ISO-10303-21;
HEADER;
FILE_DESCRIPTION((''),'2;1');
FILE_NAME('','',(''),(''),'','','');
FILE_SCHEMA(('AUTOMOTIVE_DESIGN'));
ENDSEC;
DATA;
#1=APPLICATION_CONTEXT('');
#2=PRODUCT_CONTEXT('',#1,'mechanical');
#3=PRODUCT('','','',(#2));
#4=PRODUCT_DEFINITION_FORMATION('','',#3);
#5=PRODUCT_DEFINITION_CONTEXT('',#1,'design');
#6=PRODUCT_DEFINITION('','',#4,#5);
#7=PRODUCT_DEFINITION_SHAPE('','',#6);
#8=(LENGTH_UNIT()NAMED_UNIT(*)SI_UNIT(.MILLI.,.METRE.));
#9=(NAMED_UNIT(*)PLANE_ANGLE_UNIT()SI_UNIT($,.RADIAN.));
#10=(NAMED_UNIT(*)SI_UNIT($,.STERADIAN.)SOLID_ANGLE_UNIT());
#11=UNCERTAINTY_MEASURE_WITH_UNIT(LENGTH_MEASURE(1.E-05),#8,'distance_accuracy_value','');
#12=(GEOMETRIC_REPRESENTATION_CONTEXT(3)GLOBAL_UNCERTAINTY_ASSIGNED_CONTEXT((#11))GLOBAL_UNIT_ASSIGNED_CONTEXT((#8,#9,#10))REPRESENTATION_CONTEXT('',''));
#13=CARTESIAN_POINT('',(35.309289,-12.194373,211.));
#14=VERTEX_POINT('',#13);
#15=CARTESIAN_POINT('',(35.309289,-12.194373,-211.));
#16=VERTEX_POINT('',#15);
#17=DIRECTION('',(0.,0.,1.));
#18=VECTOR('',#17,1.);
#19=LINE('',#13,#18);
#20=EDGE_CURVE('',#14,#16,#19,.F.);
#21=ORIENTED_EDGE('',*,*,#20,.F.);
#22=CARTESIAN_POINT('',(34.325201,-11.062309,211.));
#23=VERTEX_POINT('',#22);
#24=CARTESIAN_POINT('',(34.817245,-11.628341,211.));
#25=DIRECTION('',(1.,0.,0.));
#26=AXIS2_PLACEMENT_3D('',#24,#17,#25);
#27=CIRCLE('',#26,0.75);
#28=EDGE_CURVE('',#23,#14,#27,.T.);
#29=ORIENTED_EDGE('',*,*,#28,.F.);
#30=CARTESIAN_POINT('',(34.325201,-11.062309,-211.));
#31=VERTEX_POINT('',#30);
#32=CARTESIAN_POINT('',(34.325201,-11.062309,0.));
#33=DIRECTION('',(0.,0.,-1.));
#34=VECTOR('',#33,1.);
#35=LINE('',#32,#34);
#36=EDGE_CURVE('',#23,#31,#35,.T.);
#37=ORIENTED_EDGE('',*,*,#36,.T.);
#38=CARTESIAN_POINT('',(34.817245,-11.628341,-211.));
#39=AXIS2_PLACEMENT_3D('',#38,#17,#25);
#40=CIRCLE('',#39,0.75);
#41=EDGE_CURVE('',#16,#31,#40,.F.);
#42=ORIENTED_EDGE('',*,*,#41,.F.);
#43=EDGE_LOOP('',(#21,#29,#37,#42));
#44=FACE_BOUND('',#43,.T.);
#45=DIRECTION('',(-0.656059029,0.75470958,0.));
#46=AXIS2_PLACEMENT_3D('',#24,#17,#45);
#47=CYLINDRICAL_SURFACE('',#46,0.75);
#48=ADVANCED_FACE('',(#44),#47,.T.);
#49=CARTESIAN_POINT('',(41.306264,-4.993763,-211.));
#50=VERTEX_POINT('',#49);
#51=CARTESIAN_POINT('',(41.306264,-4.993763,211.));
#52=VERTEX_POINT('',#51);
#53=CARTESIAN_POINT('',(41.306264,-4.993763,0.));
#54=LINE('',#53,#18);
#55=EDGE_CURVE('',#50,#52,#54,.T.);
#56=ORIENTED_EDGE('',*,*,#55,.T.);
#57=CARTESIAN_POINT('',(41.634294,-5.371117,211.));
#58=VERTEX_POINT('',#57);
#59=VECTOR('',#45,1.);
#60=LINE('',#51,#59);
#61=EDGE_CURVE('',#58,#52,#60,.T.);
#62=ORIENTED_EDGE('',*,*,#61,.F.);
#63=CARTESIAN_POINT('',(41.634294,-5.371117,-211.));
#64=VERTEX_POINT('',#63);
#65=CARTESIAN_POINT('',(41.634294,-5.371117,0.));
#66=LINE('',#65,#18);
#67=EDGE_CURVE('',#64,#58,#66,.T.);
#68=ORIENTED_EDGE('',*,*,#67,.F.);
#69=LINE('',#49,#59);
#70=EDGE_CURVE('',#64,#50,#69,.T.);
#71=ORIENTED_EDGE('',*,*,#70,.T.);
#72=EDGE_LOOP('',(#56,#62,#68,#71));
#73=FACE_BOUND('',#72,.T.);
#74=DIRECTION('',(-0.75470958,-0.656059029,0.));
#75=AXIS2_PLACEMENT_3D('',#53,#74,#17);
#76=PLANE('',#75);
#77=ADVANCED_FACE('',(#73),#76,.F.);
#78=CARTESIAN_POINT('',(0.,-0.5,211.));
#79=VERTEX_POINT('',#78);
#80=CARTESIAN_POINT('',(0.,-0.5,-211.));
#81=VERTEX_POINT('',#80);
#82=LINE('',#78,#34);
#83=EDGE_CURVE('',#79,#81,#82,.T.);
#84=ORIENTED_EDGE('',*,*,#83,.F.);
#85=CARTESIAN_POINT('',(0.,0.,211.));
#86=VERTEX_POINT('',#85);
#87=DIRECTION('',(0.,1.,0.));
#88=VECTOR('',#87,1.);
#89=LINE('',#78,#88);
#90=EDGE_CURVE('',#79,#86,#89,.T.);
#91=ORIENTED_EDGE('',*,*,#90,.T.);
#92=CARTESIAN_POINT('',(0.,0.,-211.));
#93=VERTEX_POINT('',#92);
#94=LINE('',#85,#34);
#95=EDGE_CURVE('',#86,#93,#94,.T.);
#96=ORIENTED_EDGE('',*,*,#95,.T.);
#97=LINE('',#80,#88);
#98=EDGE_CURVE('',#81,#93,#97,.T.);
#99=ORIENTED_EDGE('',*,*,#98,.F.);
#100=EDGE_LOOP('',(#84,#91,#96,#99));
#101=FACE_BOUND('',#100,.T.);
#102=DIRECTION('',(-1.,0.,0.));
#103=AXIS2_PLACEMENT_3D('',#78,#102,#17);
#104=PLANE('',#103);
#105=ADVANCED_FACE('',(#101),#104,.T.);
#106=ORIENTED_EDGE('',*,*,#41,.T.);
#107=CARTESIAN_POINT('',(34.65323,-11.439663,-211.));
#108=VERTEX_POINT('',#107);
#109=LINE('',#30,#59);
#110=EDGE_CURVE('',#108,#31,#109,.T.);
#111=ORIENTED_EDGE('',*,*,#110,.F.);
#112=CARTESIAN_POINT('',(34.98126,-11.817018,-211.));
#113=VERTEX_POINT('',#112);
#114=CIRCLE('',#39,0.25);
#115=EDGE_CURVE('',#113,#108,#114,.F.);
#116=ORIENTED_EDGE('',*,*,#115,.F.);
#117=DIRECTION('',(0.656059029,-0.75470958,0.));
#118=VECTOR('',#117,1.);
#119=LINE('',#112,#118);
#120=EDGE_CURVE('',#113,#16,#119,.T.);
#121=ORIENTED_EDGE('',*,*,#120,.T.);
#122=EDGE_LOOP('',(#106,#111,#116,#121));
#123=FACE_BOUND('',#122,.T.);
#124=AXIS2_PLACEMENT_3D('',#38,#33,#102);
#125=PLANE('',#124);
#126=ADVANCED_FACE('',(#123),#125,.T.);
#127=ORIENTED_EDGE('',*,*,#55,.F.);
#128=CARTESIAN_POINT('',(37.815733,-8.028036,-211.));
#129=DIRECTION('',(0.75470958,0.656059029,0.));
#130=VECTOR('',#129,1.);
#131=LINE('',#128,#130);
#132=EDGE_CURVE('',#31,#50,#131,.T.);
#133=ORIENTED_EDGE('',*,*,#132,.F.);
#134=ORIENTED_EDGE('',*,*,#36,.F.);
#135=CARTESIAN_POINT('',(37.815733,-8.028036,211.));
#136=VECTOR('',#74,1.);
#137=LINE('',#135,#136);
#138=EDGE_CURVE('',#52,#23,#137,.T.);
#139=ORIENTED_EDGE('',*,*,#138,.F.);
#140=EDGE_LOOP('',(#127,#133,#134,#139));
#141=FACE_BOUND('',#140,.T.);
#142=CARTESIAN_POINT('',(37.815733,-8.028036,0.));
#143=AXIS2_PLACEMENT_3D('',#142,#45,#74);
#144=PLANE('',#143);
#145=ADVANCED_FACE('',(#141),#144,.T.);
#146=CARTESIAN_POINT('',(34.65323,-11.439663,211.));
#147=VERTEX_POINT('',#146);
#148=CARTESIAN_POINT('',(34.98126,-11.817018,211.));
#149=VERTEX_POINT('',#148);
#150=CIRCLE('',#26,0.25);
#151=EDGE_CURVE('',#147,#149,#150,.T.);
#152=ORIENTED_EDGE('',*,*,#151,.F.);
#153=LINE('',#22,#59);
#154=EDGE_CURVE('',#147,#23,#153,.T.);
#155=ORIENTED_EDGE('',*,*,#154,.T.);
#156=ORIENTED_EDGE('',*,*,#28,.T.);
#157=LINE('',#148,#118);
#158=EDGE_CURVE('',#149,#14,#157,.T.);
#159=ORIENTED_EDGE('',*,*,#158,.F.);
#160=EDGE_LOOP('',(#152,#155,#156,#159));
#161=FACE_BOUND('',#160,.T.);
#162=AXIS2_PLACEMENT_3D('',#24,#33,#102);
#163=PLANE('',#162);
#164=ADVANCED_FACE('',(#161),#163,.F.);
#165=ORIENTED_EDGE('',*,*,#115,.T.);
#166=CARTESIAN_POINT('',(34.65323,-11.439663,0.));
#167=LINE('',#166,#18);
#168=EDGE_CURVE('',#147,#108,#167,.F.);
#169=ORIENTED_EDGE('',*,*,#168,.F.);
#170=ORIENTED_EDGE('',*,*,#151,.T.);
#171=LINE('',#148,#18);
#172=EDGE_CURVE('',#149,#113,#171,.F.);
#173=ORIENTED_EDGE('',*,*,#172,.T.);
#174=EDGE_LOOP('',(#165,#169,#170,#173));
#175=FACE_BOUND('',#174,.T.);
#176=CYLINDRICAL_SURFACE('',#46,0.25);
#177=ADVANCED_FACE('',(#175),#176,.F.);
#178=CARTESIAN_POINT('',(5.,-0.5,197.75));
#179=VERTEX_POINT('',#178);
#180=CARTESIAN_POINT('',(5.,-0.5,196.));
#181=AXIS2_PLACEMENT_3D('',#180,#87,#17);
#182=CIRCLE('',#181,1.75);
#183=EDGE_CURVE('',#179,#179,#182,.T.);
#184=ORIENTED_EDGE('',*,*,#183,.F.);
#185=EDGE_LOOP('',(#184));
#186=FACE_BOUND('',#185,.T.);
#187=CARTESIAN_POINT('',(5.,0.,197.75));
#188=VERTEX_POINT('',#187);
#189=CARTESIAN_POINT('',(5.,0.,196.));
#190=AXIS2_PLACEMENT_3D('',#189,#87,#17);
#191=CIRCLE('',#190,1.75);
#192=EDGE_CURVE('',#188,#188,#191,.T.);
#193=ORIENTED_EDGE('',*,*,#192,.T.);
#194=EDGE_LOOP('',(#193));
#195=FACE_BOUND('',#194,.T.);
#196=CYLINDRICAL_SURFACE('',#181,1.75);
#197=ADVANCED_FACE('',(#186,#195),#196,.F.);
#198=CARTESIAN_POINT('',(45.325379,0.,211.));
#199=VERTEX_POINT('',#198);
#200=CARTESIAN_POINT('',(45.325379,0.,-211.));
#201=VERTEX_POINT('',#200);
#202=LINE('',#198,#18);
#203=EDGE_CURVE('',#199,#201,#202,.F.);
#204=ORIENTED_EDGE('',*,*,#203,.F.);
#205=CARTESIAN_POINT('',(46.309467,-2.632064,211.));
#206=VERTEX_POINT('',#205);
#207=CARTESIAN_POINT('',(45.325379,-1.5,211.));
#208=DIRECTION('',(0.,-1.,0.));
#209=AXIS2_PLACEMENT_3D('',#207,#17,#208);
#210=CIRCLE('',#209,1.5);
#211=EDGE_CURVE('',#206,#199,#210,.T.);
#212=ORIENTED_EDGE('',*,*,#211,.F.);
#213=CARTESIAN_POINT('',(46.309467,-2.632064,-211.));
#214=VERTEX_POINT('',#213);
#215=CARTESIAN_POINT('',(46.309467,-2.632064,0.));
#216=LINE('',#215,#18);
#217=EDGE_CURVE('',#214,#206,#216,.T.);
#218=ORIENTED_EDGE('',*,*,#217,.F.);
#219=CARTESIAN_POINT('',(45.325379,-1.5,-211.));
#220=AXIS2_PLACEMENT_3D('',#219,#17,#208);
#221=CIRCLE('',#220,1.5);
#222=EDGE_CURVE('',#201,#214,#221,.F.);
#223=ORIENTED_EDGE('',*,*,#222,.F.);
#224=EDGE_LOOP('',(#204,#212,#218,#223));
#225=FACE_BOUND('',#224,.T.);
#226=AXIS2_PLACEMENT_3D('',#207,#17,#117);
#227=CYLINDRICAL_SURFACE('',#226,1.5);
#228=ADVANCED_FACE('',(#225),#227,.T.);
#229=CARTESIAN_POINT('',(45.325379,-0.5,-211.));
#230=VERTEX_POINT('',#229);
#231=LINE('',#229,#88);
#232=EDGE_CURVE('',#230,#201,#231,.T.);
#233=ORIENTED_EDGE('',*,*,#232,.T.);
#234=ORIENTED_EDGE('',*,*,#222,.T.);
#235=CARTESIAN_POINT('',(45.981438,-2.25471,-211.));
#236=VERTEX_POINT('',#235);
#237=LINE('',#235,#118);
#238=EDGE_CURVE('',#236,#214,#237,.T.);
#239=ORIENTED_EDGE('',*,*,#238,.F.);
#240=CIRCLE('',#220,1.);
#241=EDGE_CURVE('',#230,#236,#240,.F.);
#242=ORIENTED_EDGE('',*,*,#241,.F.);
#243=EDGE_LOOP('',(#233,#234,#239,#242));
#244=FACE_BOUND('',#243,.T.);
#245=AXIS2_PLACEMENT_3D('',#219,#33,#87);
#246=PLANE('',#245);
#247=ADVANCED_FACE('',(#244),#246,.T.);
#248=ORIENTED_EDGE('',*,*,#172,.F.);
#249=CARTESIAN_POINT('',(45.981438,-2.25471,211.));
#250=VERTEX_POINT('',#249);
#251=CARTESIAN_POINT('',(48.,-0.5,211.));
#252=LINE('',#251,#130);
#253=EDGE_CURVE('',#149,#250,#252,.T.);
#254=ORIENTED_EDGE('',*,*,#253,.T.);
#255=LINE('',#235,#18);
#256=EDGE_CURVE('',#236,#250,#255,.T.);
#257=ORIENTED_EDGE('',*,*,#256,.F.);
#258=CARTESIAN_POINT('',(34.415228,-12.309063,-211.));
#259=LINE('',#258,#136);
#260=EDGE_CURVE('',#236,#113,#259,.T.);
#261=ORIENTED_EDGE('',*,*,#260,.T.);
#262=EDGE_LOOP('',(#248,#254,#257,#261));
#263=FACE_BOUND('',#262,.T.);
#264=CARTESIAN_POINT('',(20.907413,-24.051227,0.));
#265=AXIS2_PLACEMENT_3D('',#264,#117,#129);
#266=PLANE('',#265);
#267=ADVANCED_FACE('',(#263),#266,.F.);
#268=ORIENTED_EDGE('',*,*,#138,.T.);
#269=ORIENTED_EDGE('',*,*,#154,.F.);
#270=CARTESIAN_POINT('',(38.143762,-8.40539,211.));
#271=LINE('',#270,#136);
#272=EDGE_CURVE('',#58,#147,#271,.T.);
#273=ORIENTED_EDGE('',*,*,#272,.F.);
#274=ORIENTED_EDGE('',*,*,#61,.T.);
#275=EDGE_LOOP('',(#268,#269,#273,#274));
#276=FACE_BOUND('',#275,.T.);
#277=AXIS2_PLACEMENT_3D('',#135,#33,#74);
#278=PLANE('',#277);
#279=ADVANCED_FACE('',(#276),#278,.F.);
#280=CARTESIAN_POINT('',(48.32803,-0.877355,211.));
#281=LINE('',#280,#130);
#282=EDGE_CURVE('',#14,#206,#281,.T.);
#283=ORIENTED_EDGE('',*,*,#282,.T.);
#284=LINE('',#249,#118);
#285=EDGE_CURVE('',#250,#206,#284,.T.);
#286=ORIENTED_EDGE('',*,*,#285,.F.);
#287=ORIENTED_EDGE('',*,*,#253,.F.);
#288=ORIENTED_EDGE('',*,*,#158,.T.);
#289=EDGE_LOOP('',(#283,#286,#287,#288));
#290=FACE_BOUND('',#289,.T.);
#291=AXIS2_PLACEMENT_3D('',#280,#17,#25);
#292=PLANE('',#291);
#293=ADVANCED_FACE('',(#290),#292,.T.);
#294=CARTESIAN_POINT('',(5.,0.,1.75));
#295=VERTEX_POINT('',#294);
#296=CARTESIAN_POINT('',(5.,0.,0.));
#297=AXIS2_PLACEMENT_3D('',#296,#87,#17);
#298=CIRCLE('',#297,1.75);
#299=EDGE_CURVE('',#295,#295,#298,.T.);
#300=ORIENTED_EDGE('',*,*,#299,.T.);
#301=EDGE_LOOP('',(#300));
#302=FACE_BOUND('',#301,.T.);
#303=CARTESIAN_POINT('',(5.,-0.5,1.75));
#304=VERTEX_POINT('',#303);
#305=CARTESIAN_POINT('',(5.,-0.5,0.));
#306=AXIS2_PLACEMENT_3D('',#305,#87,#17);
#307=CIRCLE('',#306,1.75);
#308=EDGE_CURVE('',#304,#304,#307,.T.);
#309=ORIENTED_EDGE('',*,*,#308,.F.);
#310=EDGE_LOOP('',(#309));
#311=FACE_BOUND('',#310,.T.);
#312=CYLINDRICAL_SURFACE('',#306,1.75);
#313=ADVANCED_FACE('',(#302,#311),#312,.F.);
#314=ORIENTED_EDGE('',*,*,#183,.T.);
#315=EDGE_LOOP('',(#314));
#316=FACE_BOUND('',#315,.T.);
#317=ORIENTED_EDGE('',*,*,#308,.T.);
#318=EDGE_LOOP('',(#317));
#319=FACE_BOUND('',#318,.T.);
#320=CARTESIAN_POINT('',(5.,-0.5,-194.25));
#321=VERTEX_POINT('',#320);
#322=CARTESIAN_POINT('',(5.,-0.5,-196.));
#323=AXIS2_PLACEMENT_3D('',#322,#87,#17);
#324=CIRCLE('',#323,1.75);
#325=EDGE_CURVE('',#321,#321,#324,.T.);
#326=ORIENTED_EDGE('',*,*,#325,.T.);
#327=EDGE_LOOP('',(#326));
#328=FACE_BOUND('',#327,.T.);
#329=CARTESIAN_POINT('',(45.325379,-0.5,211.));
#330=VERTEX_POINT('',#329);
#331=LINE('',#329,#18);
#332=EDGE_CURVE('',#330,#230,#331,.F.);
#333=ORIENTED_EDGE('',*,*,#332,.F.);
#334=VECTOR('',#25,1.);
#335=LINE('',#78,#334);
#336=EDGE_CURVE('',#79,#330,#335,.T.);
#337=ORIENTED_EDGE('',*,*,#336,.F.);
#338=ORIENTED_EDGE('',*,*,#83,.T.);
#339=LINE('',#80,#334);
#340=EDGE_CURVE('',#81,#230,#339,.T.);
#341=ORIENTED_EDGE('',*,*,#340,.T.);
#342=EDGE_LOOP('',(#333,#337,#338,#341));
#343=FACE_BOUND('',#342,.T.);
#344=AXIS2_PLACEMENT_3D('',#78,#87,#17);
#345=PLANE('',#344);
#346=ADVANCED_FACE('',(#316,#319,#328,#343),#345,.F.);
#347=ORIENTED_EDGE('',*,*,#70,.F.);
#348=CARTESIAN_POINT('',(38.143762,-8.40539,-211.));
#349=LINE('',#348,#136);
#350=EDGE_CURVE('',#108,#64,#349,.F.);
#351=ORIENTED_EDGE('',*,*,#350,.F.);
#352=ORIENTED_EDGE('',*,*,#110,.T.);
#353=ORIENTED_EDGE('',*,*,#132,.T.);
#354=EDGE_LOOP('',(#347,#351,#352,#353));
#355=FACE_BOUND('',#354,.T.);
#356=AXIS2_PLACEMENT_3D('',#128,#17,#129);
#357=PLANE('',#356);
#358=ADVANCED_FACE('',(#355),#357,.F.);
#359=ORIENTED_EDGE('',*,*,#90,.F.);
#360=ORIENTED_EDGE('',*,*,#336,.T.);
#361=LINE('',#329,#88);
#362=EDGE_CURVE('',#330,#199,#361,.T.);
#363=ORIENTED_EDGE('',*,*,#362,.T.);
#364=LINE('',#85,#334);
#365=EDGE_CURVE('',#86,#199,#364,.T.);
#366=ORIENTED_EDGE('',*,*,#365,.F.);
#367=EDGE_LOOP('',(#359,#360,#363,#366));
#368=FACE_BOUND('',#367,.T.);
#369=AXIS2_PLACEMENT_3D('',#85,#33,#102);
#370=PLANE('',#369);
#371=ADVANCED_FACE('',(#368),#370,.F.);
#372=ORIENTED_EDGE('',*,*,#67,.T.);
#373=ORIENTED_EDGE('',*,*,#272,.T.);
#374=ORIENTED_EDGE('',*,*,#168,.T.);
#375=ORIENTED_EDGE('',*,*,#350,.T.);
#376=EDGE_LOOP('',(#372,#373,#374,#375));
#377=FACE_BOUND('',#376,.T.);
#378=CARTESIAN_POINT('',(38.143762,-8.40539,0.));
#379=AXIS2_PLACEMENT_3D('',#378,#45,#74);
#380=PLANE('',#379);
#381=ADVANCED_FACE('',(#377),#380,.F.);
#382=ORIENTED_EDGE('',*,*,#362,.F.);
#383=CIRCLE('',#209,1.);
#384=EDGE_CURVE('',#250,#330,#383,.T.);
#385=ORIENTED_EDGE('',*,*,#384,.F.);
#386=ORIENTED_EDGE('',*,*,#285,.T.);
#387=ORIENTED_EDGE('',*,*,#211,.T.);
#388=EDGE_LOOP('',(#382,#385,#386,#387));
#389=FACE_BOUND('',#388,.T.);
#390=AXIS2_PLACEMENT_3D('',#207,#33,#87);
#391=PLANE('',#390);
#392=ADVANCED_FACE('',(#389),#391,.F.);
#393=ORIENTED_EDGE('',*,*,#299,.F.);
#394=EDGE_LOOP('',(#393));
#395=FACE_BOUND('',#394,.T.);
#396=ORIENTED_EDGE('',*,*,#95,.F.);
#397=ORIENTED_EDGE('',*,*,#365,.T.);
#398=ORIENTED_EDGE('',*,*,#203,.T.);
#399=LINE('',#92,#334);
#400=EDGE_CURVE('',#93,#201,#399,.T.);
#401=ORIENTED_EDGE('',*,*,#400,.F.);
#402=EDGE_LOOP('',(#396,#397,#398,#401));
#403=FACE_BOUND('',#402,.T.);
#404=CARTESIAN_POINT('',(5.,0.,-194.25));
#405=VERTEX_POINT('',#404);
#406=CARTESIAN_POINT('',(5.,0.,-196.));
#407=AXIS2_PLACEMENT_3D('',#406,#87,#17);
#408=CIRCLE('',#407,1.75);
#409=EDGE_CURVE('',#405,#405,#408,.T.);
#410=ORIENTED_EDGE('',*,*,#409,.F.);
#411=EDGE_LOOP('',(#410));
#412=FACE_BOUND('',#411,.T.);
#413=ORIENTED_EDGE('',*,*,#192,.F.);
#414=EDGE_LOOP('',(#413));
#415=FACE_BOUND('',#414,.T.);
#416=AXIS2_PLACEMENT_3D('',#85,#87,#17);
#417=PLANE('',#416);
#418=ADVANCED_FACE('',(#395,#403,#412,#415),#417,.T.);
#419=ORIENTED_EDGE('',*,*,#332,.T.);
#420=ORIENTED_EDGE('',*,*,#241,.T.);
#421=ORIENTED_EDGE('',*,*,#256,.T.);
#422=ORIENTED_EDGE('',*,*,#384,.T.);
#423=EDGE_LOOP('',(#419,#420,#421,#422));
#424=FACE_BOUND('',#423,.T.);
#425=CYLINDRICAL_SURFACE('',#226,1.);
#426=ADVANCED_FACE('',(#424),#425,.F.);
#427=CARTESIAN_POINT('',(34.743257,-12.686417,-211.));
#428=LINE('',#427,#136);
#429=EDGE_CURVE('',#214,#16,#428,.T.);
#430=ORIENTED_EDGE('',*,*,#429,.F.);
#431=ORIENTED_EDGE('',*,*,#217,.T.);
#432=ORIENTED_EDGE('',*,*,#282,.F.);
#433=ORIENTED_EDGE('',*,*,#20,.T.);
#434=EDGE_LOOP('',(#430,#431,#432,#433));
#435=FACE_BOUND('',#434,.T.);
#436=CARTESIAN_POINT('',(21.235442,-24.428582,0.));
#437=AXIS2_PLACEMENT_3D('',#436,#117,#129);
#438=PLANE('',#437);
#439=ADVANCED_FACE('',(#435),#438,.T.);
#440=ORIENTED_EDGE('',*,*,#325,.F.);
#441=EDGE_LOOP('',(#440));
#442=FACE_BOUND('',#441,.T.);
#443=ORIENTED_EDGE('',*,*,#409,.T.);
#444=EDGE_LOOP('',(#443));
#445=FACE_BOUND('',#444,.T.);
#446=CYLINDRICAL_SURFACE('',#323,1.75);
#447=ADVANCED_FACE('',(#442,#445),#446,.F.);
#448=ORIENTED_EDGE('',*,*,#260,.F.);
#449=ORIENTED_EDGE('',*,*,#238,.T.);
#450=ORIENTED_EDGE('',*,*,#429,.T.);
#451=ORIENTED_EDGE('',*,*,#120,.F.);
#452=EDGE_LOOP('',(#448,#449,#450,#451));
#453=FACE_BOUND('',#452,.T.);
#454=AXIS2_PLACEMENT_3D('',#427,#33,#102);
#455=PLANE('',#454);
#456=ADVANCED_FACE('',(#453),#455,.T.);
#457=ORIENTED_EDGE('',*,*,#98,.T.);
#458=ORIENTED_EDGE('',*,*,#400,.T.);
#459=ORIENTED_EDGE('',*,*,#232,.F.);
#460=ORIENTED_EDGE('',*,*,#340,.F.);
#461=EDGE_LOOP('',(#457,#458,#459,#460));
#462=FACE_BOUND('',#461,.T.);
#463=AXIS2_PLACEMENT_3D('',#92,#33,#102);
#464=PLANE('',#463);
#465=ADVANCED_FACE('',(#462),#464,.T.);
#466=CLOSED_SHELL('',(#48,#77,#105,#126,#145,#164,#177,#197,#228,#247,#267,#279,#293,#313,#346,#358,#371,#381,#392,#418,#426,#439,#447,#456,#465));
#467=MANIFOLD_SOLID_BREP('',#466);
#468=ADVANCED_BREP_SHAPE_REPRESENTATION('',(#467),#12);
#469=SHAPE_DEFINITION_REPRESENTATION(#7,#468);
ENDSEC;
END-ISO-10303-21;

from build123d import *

# Parameters (mm, degrees)
SKETCH1_W                    = 48
SKETCH1_H                    = 0.5
BASE_FLANGE1_DEPTH           = 211
SKETCH6_R                    = 1.75
CUT_EXTRUDE1_DEPTH           = 10
EDGE_FLANGE1_STRIP_CUT_DEPTH = 422
EDGE_FLANGE1_DEPTH           = 422
HEM1_START                   = -211
HEM1_DEPTH                   = 422
HEM1_2_DEPTH                 = 422


# Read off the part's stored shape, not the designer's step: Hem1
# Sheet-metal steps are written as plain solids
with BuildPart() as part:
    # Sketch1 → Base-Flange1 (new, symmetric)
    with BuildSketch(Plane.XY):
        with Locations((24, -0.25)):
            Rectangle(SKETCH1_W, SKETCH1_H)
    extrude(amount=BASE_FLANGE1_DEPTH, both=True)

    # Sketch6 → Cut-Extrude1 (cut)
    with BuildSketch(Plane(origin=(0, 0, 0), x_dir=(1, 0, 0), z_dir=(0, 1, 0))):
        with Locations(Location((5, 196, 0), (0, 0, 270))):
            Circle(SKETCH6_R)
        with Locations(Location((5, 0, 0), (0, 0, 270))):
            Circle(SKETCH6_R)
        with Locations(Location((5, -196, 0), (0, 0, 270))):
            Circle(SKETCH6_R)
    extrude(amount=-CUT_EXTRUDE1_DEPTH, mode=Mode.SUBTRACT)

    # Edge-Flange1 strip (across the edge) → Edge-Flange1 strip cut (cut)
    with BuildSketch(Plane(origin=(48, -0.5, -211), x_dir=(-0.6560590289905086, 0.754709580222771, 0), z_dir=(0, 0, 1))):
        Polygon((-4.886773951, -6.383716909), (2.13206437, 1.69053295), (1.75470958, 2.018562465), (-5.264128741, -6.055687395), align=None)
    extrude(amount=EDGE_FLANGE1_STRIP_CUT_DEPTH, mode=Mode.SUBTRACT)

    # Edge-Flange1 section (across the edge) → Edge-Flange1 (add)
    with BuildSketch(Plane(origin=(48, -0.5, -211), x_dir=(-0.6560590289905086, 0.754709580222771, 0), z_dir=(0, 0, 1))):
        with BuildLine():
            Line((-0.5, 2.674621494), (-0.5, 18))
            Line((-0.5, 18), (0, 18))
            Line((0, 18), (0, 2.674621494))
            ThreePointArc((0, 2.674621494), (0.649792619, 1.737949305), (1.75470958, 2.018562465))
            Line((1.75470958, 2.018562465), (2.13206437, 1.69053295))
            ThreePointArc((2.13206437, 1.69053295), (0.474688928, 1.26961321), (-0.5, 2.674621494))
        make_face()
    extrude(amount=EDGE_FLANGE1_DEPTH)

    # Hem1 outline → Hem1 (cut)
    with BuildSketch(Plane.XY.offset(HEM1_START)):
        with BuildLine():
            ThreePointArc((35.309289256, -12.19437304), (34.892198615, -12.374586092), (34.447599479, -12.280922038))
            Line((34.447599479, -12.280922038), (34.415227556, -12.309062522))
            Line((34.415227556, -12.309062522), (34.74325707, -12.686417312))
            Line((34.74325707, -12.686417312), (35.309289256, -12.19437304))
        make_face()
    extrude(amount=HEM1_DEPTH, mode=Mode.SUBTRACT)

    # Hem1 2 outline → Hem1 2 (add)
    with BuildSketch(Plane.XY.offset(HEM1_START)):
        with BuildLine():
            Line((41.634293844, -5.371117442), (41.306264329, -4.993762652))
            Line((41.306264329, -4.993762652), (34.325200712, -11.06230867))
            ThreePointArc((34.325200712, -11.06230867), (34.070999747, -11.703294486), (34.447599479, -12.280922038))
            Line((34.447599479, -12.280922038), (34.981259741, -11.81701825))
            ThreePointArc((34.981259741, -11.81701825), (34.628567589, -11.792355612), (34.653230227, -11.43966346))
            Line((34.653230227, -11.43966346), (41.634293844, -5.371117442))
        make_face()
    extrude(amount=HEM1_2_DEPTH)


solid = part.part
